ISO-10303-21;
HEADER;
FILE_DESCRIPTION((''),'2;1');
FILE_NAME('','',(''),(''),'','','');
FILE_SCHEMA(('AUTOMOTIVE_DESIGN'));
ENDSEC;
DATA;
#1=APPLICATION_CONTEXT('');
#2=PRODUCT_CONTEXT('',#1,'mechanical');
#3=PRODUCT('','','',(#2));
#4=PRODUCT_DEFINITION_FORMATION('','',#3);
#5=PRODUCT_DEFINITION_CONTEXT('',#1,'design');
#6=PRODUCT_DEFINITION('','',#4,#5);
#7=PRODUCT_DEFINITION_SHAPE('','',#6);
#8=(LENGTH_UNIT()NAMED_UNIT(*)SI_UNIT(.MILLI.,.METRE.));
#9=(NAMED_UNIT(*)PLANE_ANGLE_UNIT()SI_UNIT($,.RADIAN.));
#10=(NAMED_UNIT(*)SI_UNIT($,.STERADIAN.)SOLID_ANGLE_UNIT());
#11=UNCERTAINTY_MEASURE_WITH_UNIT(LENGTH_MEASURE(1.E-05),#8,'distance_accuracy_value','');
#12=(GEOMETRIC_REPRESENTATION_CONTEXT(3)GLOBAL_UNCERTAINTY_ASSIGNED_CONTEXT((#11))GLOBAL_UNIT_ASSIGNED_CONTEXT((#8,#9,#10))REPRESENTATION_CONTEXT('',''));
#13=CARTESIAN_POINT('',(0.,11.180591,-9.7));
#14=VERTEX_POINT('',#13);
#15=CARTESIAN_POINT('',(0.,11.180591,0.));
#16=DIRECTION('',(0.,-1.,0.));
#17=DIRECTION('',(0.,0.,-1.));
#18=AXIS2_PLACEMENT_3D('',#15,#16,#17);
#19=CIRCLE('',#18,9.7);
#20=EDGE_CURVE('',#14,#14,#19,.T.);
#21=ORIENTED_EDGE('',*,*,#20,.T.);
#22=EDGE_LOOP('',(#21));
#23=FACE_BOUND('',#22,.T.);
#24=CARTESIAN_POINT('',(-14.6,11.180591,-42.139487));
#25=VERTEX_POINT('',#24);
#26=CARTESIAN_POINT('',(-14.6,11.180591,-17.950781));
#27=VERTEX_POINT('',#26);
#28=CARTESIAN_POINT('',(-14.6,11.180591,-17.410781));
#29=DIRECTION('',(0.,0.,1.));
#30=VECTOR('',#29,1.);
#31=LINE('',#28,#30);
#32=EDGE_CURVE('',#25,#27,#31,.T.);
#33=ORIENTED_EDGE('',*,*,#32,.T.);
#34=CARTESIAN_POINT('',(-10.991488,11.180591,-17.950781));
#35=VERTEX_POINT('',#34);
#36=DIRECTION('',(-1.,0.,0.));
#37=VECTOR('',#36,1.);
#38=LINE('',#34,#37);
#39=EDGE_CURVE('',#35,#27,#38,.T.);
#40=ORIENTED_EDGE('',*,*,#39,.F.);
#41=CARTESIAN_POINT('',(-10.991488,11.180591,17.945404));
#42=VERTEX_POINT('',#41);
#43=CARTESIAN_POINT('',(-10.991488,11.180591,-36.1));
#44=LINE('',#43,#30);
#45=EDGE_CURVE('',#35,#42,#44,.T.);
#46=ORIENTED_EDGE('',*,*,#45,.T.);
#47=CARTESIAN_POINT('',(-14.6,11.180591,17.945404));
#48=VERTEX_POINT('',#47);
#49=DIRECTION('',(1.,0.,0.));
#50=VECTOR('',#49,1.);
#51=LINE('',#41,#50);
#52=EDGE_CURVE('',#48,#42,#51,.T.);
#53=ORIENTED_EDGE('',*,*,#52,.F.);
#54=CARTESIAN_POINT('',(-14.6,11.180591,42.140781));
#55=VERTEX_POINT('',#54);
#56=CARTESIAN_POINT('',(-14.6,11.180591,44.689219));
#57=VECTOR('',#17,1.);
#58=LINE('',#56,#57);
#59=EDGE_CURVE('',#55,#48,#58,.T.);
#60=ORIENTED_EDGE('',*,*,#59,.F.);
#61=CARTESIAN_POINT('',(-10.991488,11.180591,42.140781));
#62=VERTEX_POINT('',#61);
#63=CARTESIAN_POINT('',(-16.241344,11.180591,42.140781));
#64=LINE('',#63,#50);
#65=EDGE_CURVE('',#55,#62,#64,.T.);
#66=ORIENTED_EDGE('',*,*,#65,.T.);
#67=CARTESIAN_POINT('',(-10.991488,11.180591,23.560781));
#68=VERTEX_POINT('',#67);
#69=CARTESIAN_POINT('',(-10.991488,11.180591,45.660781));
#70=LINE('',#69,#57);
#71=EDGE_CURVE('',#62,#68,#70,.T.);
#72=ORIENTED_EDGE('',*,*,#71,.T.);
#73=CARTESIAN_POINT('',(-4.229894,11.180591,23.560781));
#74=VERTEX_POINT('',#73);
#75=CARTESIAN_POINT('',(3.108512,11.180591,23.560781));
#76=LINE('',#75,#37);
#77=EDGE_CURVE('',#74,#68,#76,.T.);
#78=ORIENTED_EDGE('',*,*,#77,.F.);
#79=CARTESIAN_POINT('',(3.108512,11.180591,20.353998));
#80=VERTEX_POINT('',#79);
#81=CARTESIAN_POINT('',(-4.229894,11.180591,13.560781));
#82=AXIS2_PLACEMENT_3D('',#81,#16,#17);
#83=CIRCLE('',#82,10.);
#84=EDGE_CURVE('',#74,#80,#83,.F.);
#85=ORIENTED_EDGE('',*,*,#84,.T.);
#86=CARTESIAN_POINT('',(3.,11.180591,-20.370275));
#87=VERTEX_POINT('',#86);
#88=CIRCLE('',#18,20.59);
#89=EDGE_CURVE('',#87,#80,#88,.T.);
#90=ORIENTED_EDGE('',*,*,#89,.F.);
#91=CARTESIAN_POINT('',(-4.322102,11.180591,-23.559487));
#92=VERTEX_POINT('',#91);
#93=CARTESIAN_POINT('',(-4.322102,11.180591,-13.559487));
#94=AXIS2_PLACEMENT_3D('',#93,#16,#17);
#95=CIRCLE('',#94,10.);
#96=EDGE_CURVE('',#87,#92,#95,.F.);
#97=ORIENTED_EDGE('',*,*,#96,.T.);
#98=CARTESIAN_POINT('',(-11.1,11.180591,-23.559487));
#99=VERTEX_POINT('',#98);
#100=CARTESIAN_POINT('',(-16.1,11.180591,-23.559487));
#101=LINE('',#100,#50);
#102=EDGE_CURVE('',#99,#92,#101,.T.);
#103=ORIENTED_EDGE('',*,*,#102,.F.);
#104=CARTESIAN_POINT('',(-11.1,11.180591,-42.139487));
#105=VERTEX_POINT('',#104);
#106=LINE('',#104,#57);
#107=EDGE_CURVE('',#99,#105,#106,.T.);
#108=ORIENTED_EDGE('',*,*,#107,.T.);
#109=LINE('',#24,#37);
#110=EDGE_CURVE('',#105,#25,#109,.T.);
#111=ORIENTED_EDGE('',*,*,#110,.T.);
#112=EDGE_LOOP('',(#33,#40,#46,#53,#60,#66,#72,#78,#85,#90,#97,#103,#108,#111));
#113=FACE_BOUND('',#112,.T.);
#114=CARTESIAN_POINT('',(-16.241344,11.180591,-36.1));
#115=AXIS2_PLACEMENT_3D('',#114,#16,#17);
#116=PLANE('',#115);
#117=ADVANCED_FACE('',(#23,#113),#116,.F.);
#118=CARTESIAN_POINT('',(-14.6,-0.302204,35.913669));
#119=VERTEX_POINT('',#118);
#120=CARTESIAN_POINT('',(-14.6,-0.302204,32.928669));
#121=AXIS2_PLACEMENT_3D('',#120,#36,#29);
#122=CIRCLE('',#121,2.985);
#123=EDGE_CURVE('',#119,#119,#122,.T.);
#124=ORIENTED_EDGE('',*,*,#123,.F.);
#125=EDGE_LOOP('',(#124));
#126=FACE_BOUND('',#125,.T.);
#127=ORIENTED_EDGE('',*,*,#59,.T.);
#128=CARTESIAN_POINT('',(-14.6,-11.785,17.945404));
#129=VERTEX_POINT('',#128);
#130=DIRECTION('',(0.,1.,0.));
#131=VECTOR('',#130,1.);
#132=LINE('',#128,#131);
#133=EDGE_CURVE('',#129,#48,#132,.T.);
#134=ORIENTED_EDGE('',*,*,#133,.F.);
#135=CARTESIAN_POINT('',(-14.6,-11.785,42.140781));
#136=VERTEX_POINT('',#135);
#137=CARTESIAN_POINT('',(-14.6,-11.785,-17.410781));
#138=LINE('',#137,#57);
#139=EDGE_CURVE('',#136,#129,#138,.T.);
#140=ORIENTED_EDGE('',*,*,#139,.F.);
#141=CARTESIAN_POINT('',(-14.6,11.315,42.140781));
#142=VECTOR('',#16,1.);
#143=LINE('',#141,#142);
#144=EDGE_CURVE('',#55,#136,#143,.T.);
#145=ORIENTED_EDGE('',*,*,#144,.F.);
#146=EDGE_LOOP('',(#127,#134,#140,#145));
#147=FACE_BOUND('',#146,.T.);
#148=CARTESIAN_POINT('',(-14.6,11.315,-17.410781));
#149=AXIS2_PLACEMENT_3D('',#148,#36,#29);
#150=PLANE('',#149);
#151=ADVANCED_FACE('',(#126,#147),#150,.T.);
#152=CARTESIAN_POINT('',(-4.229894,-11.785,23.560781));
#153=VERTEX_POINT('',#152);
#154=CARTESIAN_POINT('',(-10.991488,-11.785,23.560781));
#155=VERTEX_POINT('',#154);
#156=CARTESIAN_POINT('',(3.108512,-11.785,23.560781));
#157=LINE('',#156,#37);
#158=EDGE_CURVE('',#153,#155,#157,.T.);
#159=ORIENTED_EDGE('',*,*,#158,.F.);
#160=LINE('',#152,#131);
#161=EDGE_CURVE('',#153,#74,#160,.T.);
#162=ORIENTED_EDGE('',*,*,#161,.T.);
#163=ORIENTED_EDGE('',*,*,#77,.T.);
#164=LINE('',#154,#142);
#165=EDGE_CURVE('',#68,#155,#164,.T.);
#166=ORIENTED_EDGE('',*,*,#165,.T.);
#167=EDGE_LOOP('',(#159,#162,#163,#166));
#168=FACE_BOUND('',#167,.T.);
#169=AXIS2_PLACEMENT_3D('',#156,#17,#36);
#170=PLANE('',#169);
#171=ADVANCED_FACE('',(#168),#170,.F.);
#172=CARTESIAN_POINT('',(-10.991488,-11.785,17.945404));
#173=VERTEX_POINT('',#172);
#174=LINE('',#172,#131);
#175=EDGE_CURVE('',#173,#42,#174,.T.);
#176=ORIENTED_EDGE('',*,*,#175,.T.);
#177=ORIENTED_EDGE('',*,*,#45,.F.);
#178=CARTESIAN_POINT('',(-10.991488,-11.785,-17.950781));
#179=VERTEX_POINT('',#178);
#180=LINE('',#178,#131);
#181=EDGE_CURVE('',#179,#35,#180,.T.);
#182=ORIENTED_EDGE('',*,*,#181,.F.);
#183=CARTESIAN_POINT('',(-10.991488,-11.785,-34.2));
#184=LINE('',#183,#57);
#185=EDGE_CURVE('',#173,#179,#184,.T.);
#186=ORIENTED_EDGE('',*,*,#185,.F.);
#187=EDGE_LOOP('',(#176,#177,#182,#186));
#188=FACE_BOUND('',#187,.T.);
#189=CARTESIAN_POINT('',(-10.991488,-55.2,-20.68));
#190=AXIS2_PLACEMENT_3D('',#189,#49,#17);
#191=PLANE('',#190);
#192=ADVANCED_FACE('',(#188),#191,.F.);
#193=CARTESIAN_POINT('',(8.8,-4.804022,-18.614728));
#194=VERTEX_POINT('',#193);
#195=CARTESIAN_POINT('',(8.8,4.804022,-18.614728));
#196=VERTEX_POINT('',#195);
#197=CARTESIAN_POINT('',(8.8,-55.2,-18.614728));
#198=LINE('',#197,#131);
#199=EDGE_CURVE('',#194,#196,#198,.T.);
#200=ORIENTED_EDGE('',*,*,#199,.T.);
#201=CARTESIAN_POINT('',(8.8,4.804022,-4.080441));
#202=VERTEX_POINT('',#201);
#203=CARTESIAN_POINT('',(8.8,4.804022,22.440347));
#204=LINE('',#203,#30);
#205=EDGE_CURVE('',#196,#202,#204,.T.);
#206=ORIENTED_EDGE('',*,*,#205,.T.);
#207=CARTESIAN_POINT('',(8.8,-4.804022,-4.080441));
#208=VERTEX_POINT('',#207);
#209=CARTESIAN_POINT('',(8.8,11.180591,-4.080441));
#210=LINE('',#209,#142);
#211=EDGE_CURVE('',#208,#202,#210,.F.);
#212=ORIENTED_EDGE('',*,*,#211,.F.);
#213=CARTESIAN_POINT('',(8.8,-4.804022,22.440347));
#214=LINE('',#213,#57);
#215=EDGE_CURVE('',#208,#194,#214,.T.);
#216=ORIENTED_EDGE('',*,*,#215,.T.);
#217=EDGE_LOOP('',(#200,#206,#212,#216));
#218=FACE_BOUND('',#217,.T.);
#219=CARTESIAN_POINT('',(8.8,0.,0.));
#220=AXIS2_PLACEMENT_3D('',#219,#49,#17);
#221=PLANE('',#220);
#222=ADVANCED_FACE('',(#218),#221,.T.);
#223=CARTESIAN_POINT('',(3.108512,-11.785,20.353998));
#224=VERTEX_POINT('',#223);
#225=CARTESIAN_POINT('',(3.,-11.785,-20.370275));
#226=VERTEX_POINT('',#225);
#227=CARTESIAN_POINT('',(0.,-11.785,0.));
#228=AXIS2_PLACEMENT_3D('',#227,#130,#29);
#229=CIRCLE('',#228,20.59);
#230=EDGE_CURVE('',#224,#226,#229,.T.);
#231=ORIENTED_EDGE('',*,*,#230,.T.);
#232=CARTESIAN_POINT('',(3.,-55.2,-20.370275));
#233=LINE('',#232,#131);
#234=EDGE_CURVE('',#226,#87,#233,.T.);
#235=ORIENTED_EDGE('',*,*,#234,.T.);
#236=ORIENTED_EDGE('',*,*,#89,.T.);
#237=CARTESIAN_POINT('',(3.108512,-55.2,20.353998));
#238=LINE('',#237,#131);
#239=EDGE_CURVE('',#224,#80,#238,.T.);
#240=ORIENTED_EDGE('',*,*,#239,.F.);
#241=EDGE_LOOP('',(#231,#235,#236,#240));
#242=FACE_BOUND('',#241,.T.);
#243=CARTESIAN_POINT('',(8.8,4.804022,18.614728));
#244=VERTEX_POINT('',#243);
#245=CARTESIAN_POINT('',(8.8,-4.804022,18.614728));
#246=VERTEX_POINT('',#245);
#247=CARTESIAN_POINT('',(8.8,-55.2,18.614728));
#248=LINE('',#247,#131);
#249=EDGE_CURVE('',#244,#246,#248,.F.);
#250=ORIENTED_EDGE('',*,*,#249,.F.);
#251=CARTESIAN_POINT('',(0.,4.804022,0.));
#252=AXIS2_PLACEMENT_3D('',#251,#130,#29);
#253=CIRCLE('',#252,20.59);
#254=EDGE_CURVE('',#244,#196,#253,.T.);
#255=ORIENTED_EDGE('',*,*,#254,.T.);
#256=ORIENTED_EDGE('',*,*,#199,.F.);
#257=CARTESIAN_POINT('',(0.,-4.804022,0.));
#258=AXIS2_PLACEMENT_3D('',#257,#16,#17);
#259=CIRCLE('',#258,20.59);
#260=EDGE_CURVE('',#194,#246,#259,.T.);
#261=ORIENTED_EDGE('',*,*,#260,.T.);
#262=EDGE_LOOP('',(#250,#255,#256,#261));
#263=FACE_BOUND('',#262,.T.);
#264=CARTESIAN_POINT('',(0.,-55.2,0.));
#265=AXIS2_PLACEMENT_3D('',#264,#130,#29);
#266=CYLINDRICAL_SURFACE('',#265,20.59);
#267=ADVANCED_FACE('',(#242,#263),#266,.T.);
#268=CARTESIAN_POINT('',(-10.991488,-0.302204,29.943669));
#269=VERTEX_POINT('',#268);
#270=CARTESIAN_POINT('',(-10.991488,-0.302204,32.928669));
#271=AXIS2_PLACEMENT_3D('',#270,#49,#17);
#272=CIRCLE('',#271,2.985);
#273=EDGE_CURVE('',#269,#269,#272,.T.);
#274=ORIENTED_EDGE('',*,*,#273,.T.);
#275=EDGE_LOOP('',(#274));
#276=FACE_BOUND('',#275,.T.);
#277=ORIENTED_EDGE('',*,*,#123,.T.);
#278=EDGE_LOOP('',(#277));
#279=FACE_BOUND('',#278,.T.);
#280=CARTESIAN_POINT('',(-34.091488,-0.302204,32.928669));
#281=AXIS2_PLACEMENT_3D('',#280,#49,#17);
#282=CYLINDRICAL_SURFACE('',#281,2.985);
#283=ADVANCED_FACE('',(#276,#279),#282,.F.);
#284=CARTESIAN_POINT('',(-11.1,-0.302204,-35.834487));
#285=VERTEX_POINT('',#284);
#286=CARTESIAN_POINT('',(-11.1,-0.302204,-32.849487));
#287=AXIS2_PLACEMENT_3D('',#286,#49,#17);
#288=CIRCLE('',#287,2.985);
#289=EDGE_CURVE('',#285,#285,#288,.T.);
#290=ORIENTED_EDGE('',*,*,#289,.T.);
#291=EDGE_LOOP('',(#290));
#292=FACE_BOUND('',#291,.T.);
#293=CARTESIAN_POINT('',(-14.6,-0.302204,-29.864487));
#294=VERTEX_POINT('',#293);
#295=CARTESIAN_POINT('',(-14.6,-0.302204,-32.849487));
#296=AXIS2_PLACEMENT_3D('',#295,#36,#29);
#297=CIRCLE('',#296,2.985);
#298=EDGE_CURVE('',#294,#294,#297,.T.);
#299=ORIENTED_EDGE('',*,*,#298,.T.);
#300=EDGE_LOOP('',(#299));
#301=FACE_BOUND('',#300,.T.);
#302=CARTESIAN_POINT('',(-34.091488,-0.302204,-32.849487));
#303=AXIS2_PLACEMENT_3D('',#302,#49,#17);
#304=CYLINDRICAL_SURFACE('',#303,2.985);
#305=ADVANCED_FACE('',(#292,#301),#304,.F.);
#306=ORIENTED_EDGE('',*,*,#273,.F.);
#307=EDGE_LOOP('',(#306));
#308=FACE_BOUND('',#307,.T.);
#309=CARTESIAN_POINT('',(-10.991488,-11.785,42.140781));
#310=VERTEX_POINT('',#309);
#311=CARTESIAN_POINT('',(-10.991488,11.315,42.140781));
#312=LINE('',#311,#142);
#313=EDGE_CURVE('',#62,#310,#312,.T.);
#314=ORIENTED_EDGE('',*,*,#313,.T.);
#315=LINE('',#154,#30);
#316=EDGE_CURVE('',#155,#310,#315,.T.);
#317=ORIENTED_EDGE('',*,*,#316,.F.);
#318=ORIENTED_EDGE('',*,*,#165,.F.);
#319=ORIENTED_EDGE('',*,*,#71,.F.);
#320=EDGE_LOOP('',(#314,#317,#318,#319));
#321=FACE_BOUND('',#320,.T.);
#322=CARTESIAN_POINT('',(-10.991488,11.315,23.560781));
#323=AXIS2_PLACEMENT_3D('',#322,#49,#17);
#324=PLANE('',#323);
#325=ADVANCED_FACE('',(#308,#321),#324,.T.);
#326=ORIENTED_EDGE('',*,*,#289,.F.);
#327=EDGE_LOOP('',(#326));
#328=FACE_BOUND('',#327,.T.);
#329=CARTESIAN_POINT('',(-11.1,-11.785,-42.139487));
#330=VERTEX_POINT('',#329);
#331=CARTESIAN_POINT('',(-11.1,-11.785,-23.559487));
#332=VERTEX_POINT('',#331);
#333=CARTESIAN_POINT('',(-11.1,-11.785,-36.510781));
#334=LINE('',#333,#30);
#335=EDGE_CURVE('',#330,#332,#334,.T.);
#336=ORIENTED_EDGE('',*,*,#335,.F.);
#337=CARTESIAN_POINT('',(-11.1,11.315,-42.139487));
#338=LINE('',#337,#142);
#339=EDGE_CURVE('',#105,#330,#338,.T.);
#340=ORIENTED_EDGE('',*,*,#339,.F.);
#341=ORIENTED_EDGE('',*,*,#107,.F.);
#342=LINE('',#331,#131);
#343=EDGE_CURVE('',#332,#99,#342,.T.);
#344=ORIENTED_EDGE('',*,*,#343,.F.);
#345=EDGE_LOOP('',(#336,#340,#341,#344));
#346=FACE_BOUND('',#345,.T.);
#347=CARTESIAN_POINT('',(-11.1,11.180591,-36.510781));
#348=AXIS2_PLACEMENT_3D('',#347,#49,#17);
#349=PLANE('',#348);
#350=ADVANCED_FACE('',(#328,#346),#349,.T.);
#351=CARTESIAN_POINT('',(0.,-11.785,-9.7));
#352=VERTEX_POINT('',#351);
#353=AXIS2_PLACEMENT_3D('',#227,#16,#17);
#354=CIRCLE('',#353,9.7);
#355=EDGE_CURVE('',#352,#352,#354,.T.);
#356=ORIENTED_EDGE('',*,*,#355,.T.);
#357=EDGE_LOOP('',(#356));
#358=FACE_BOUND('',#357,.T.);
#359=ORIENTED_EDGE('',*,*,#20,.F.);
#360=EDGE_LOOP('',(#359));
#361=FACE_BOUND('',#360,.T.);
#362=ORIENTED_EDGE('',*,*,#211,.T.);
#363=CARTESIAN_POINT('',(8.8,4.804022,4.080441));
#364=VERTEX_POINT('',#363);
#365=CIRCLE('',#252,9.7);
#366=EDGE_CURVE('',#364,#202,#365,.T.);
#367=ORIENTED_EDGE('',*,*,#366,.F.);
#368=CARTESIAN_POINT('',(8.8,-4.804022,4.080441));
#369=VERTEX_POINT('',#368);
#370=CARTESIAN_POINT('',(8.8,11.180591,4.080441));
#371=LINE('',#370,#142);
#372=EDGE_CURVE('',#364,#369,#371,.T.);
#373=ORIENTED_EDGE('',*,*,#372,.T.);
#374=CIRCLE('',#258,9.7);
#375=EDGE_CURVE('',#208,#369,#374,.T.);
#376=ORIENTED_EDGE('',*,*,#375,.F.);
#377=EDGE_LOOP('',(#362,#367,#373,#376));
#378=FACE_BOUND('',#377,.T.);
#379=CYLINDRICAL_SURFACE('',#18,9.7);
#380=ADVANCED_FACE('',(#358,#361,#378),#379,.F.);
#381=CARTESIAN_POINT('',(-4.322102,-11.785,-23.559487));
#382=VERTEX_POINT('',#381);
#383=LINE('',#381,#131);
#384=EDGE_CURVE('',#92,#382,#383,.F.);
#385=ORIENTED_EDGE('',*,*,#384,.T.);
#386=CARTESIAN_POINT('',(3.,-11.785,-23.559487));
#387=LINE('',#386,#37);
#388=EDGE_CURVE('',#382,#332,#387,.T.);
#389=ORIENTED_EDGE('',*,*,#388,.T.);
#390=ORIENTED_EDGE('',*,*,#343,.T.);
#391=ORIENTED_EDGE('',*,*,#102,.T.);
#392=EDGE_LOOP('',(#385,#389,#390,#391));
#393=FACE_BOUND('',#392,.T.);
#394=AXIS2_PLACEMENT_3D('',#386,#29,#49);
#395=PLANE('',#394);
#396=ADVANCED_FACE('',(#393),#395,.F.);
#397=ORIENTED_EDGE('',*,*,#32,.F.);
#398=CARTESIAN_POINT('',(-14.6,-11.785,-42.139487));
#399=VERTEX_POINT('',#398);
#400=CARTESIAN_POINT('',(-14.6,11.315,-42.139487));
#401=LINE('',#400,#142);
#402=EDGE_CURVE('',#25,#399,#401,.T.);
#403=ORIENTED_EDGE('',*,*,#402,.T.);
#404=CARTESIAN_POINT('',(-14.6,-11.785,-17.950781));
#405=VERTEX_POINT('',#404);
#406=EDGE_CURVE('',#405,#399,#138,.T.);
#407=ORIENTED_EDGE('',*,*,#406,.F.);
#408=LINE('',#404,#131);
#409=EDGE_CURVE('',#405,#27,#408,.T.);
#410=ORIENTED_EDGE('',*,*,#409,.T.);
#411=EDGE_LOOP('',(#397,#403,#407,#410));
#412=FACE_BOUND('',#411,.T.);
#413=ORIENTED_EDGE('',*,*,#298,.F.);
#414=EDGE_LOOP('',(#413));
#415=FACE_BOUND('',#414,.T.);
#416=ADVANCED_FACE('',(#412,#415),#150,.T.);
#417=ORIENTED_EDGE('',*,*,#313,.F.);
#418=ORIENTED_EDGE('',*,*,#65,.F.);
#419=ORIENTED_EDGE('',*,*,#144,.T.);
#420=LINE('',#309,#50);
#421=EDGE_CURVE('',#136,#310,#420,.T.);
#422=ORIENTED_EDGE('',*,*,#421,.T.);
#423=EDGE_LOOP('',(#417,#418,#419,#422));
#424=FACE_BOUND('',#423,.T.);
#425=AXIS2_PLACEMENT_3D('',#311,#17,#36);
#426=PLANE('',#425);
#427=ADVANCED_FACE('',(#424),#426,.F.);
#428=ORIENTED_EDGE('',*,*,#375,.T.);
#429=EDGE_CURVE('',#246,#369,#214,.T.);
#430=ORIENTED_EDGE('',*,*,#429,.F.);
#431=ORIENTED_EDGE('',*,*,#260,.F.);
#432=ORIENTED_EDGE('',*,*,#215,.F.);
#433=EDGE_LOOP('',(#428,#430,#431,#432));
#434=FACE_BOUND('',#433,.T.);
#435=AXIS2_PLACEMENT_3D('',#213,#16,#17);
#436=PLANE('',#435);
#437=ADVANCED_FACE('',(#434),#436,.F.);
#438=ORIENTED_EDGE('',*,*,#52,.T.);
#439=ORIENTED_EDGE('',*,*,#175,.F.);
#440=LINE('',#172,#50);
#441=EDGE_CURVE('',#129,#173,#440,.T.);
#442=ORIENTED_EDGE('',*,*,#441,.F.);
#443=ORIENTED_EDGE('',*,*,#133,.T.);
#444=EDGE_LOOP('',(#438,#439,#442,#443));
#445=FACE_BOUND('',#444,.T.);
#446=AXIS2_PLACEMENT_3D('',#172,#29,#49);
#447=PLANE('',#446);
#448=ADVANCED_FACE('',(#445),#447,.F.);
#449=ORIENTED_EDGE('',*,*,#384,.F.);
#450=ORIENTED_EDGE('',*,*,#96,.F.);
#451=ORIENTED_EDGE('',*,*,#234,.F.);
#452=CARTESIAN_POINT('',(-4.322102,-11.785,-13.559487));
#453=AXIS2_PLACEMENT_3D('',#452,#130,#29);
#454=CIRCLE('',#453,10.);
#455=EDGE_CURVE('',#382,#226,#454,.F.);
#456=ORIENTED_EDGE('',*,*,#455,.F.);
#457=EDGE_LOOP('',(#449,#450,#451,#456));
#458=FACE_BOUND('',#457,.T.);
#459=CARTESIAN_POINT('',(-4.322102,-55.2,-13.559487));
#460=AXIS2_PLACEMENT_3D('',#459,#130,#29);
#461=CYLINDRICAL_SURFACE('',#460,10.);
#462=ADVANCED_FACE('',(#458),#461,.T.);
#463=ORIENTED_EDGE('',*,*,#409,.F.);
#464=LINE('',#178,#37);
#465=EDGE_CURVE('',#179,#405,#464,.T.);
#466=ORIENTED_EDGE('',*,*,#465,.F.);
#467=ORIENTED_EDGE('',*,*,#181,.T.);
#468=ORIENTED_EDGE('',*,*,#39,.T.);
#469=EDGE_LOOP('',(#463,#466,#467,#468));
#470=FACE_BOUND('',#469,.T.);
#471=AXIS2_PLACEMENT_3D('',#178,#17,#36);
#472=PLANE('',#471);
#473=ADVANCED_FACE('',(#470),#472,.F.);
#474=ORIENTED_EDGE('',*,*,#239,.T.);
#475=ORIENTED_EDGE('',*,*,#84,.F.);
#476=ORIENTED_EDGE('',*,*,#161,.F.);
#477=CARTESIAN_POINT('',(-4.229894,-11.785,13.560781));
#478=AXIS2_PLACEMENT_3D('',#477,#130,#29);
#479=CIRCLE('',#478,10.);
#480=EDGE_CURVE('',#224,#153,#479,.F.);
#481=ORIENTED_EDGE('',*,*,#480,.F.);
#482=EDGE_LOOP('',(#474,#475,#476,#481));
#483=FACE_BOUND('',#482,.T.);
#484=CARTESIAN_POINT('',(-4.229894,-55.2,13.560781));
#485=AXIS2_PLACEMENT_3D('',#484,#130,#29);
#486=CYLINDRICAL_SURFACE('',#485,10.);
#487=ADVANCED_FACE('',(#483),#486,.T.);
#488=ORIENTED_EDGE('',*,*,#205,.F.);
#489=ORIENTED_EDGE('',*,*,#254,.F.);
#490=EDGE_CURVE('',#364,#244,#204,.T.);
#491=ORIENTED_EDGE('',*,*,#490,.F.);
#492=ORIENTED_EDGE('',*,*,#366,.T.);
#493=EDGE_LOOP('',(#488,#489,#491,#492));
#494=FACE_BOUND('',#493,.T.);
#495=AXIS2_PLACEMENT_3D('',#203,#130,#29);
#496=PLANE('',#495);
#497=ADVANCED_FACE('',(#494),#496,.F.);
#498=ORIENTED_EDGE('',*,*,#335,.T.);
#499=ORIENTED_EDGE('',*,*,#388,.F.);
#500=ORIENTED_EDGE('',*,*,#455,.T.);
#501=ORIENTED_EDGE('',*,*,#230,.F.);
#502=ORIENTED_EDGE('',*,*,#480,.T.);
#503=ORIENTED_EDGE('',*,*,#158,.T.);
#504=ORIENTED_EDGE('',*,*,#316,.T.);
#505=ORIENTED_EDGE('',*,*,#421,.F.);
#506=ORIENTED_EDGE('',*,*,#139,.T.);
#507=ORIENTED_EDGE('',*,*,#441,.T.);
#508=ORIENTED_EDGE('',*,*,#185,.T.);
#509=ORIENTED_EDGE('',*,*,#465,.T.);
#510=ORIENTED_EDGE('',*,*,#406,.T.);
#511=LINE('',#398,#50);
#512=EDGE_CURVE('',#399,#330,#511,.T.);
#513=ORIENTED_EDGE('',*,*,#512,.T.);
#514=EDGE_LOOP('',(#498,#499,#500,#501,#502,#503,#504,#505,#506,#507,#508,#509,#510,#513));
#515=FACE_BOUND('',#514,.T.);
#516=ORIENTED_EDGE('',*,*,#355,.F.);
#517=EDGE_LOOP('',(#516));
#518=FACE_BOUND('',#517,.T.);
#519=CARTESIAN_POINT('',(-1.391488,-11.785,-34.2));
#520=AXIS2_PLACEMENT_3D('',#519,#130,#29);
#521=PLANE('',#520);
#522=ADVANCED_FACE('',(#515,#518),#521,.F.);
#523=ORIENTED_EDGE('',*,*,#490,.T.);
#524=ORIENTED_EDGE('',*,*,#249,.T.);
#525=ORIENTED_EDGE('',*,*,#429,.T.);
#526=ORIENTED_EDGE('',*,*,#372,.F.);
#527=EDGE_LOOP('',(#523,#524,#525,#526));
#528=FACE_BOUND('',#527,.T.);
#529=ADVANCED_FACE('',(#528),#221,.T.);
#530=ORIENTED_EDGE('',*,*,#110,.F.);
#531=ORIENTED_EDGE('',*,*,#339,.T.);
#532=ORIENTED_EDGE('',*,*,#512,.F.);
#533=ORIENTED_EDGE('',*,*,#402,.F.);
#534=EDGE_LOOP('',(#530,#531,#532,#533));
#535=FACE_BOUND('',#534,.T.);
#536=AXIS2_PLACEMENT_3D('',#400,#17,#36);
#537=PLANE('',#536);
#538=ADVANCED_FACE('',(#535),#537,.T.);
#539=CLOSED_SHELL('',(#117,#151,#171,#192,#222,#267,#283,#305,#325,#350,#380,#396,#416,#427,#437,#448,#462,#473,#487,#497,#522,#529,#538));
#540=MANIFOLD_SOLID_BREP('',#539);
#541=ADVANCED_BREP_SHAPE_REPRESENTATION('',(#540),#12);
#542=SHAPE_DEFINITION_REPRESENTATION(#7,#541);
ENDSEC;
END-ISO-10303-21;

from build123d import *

# Parameters (mm, degrees)
SKETCH_1_R           = 20.68
SKETCH_1_R_2         = 9.68
EXTRUDE_1_DEPTH      = 116.68
SKETCH_11_W          = 27
SKETCH_11_H          = 150
CUT_EXTRUDE_3_DEPTH  = 40
SKETCH_13_W          = 10
SKETCH_13_H          = 128.345013401
CUT_EXTRUDE_7_DEPTH  = 126.614916312
SKETCH_15_W          = 8
SKETCH_15_H          = 68.68
CUT_EXTRUDE_9_DEPTH  = 48
SKETCH_16_W          = 15.549431524
SKETCH_16_H          = 20
SKETCH_16_W_2        = 15.459431524
EXTRUDE_4_DEPTH      = 19.2
SKETCH_17_W          = 19.20851187
SKETCH_17_H          = 14.03
CUT_EXTRUDE_10_DEPTH = 20.2
SKETCH_18_R          = 9.59
CUT_EXTRUDE_11_DEPTH = 121.289430957
SKETCH_21_R          = 2.985
CUT_EXTRUDE_12_DEPTH = 55.2
EXTRUDE_START        = 55.2
SKETCH_24_R          = 20.59
SKETCH_24_R_2        = 9.59
EXTRUDE_2_DEPTH      = 55.2
CUT_EXTRUDE_13_DEPTH = 55.2
SKETCH_26_W          = 10.00851187
SKETCH_26_H          = 41.68
CUT_EXTRUDE_15_DEPTH = 55.2
SKETCH_27_W          = 10
SKETCH_27_H          = 40
CUT_EXTRUDE_16_DEPTH = 55.2
SKETCH_28_W          = 44.880694938
SKETCH_28_H          = 9.608044066
CUT_EXTRUDE_17_DEPTH = 12.2
SKETCH_35_W          = 13.53
SKETCH_35_H          = 20
EXTRUDE_10_DEPTH     = 15
EXTRUDE_11_DEPTH     = 15
SKETCH_37_W          = 9
SKETCH_37_H          = 20
EXTRUDE_12_DEPTH     = 20
SKETCH_38_W          = 9
SKETCH_38_H          = 20
EXTRUDE_13_DEPTH     = 20
SKETCH_42_R          = 2.985
CUT_EXTRUDE_21_DEPTH = 20
CUT_EXTRUDE_23_DEPTH = 138.235841092
SKETCH_45_W          = 3
SKETCH_45_H          = 20
EXTRUDE_14_DEPTH     = 30
SKETCH_46_W          = 3
SKETCH_46_H          = 20
EXTRUDE_15_DEPTH     = 30
SKETCH_47_W          = 33.078221107
SKETCH_47_H          = 20
EXTRUDE_16_DEPTH     = 50
SKETCH_48_W          = 30
SKETCH_48_H          = 20
EXTRUDE_17_DEPTH     = 50
SKETCH_50_W          = 50
SKETCH_50_H          = 20
EXTRUDE_18_DEPTH     = 1
SKETCH_51_W          = 50
SKETCH_51_H          = 20
EXTRUDE_19_DEPTH     = 1
SKETCH_52_W          = 53
SKETCH_52_H          = 14
CUT_EXTRUDE_24_DEPTH = 151.972575738
SKETCH_53_W          = 53
SKETCH_53_H          = 14
CUT_EXTRUDE_25_DEPTH = 151.942387436
SKETCH_54_W          = 40
SKETCH_54_H          = 73.27
CUT_EXTRUDE_26_DEPTH = 147.866192927
SKETCH_56_W          = 13.00851187
SKETCH_56_H          = 20
EXTRUDE_21_DEPTH     = 3.08
SKETCH_60_W          = 6.504255935
SKETCH_60_H          = 76.35
CUT_EXTRUDE_30_DEPTH = 137.106994034
CUT_EXTRUDE_32_DEPTH = 20
SKETCH_64_W          = 16.20851187
SKETCH_64_H          = 0.09
EXTRUDE_22_DEPTH     = 20
SKETCH_65_W          = 3.495744065
SKETCH_65_H          = 3.26
CUT_EXTRUDE_33_DEPTH = 137.057988464
SKETCH_66_W          = 3.495744065
SKETCH_66_H          = 1.776778893
SKETCH_66_W_2        = 3.503635083
SKETCH_66_H_2        = 1.775
EXTRUDE_23_DEPTH     = 20.2
SKETCH_68_W          = 6.504255935
SKETCH_68_H          = 3.66
CUT_EXTRUDE_34_DEPTH = 20
SKETCH_69_R          = 2.985
CUT_EXTRUDE_35_DEPTH = 126.598983893
SKETCH_70_R          = 2.985
CUT_EXTRUDE_36_DEPTH = 132.360728238
SKETCH_71_W          = 38.005321573
SKETCH_71_H          = 111.965885132
CUT_EXTRUDE_37_DEPTH = 147.475577566
SKETCH_72_R          = 9.7
CUT_EXTRUDE_38_DEPTH = 38.185254838
CUT_EXTRUDE_START    = -22
SKETCH_77_R          = 30.59
SKETCH_77_R_2        = 20.59
CUT_EXTRUDE_2_DEPTH  = 22
SKETCH_78_W          = 34.816185151
SKETCH_78_H          = 22.96559116
EXTRUDE_26_DEPTH     = 0.1
SKETCH_80_W          = 2.900031179
SKETCH_80_H          = 6.148706656
EXTRUDE_28_DEPTH     = 23.1
SKETCH_81_W          = 6.148706656
SKETCH_81_H          = 23.1
EXTRUDE_29_DEPTH     = 14.1
SKETCH_82_W          = 6.148706656
SKETCH_82_H          = 0.13440884
CUT_EXTRUDE_39_DEPTH = 19.1
SKETCH_83_W          = 2.900031179
SKETCH_83_H          = 22.96559116
EXTRUDE_30_DEPTH     = 19.1
FILLET_1_R           = 10
SKETCH_84_W          = 3.5
SKETCH_84_H          = 19.1
EXTRUDE_31_DEPTH     = 23.1
SKETCH_85_W          = 3.5
SKETCH_85_H          = 0.52
CUT_EXTRUDE_40_DEPTH = 48.860163141
SKETCH_86_W          = 3.5
SKETCH_86_H          = 22.96559116
EXTRUDE_32_DEPTH     = 62.1
SKETCH_87_W          = 3.60851187
SKETCH_87_H          = 34.816185151
CUT_EXTRUDE_41_DEPTH = 62.1
SKETCH_89_W          = 0.10851187
SKETCH_89_H          = 6.15
EXTRUDE_33_DEPTH     = 23.1
EXTRUDE_34_DEPTH     = 22.1
SKETCH_91_W          = 0.971561636
SKETCH_91_H          = 22.96559116
CUT_EXTRUDE_42_DEPTH = 22.1
SKETCH_95_W          = 6.15
SKETCH_95_H          = 22.96559116
EXTRUDE_35_DEPTH     = 14.1
FILLET_2_R           = 10
SKETCH_96_W          = 3.60851187
SKETCH_96_H          = 2.548438364
CUT_EXTRUDE_43_DEPTH = 55.35700885
SKETCH_97_W          = 3.5
SKETCH_97_H          = 6.148706656
EXTRUDE_36_DEPTH     = 23.1
CUT_EXTRUDE_44_DEPTH = 23.1
SKETCH_99_W          = 6.15
SKETCH_99_H          = 0.13440884
CUT_EXTRUDE_45_DEPTH = 23.1
SKETCH_101_R         = 2.985
CUT_EXTRUDE_46_DEPTH = 23.1
SKETCH_103_W         = 3.60851187
SKETCH_103_H         = 0.54
CUT_EXTRUDE_49_DEPTH = 53.222714265
SKETCH_104_W         = 3.60851187
SKETCH_104_H         = 0.54
CUT_EXTRUDE_50_DEPTH = 53.222714265


with BuildPart() as part:
    # 草圖1 → 伸長-薄件1 (new body)
    with BuildSketch(Plane(origin=(0, 0, 0), x_dir=(1, 0, 0), z_dir=(0, 1, 0))):
        Circle(SKETCH_1_R)
        Circle(SKETCH_1_R_2, mode=Mode.SUBTRACT)
    extrude(amount=EXTRUDE_1_DEPTH)

    # 草圖11 → 除料-伸長3 (cut)
    with BuildSketch(Plane(origin=(0, 116.68, 0), x_dir=(1, 0, 0), z_dir=(0, 1, 0))):
        with Locations((21.70851187, -44.235815192)):
            Rectangle(SKETCH_11_W, SKETCH_11_H)
    extrude(amount=-CUT_EXTRUDE_3_DEPTH, mode=Mode.SUBTRACT)

    # 草圖13 → 除料-伸長7 (cut, through all)
    with BuildSketch(Plane.XY.offset(21)):
        with Locations((-16, 58.612182466)):
            Rectangle(SKETCH_13_W, SKETCH_13_H)
    extrude(amount=-CUT_EXTRUDE_7_DEPTH, mode=Mode.SUBTRACT)

    # 草圖15 → 除料-伸長9 (cut)
    with BuildSketch(Plane.XY.offset(21)):
        with Locations((-1.395744065, 52.34)):
            Rectangle(SKETCH_15_W, SKETCH_15_H)
    extrude(amount=-CUT_EXTRUDE_9_DEPTH, mode=Mode.SUBTRACT)

    # 草圖16 → 填料-伸長4 (add)
    with BuildSketch(Plane(origin=(8.20851187, 0, 0), x_dir=(0, 0, -1), z_dir=(1, 0, 0))):
        with Locations((12.905284238, 106.68)):
            Rectangle(SKETCH_16_W, SKETCH_16_H)
        with Locations((-12.860284238, 106.68)):
            Rectangle(SKETCH_16_W_2, SKETCH_16_H)
    extrude(amount=-EXTRUDE_4_DEPTH)

    # 草圖17 → 除料-伸長10 (cut)
    with BuildSketch(Plane(origin=(0, 116.68, 0), x_dir=(1, 0, 0), z_dir=(0, 1, 0))):
        with Locations((-1.395744065, -0.045)):
            Rectangle(SKETCH_17_W, SKETCH_17_H)
    extrude(amount=-CUT_EXTRUDE_10_DEPTH, mode=Mode.SUBTRACT)

    # 草圖18 → 除料-伸長11 (cut, through all)
    with BuildSketch(Plane.XZ):
        with Locations(Location((0, 0, 0), (0, 0, 90))):
            Circle(SKETCH_18_R)
    extrude(amount=-CUT_EXTRUDE_11_DEPTH, mode=Mode.SUBTRACT)

    # 草圖21 → 除料-伸長12 (cut)
    with BuildSketch(Plane(origin=(0, 0, -20.68), x_dir=(-1, 0, 0), z_dir=(0, 0, -1))):
        with Locations((1.39148813, 108.73)):
            Circle(SKETCH_21_R)
    extrude(amount=-CUT_EXTRUDE_12_DEPTH, mode=Mode.SUBTRACT)

    # 草圖24 → 伸長-薄件2 (add)
    with BuildSketch(Plane.XZ.offset(EXTRUDE_START)):
        Circle(SKETCH_24_R)
        Circle(SKETCH_24_R_2, mode=Mode.SUBTRACT)
    extrude(amount=-EXTRUDE_2_DEPTH)

    # 草圖25 → 除料-伸長13 (cut)
    with BuildSketch(Plane.XY.offset(21)):
        Polygon((-1.39148813, -11.785), (22.612379708, -11.785), (22.612379708, -63.873337429), (-22.749525245, -63.873337429), (-22.749525245, -11.785), align=None)
    extrude(amount=-CUT_EXTRUDE_13_DEPTH, mode=Mode.SUBTRACT)

    # 草圖26 → 除料-伸長15 (cut)
    with BuildSketch(Plane(origin=(0, 0, 0), x_dir=(1, 0, 0), z_dir=(0, 1, 0))):
        with Locations((-15.995744065, -0.16)):
            Rectangle(SKETCH_26_W, SKETCH_26_H)
    extrude(amount=-CUT_EXTRUDE_15_DEPTH, mode=Mode.SUBTRACT)

    # 草圖27 → 除料-伸長16 (cut)
    with BuildSketch(Plane(origin=(21, 0, 0), x_dir=(0, 0, -1), z_dir=(1, 0, 0))):
        with Locations((0, 41.68)):
            Rectangle(SKETCH_27_W, SKETCH_27_H)
    extrude(amount=-CUT_EXTRUDE_16_DEPTH, mode=Mode.SUBTRACT)

    # 草圖28 → 除料-伸長17 (cut)
    with BuildSketch(Plane(origin=(21, 0, 0), x_dir=(0, 0, -1), z_dir=(1, 0, 0))):
        Rectangle(SKETCH_28_W, SKETCH_28_H)
    extrude(amount=-CUT_EXTRUDE_17_DEPTH, mode=Mode.SUBTRACT)

    # 草圖35 → 填料-伸長10 (add)
    with BuildSketch(Plane.ZY.offset(10.99148813)):
        with Locations((13.825, 106.68)):
            Rectangle(SKETCH_35_W, SKETCH_35_H)
    extrude(amount=EXTRUDE_10_DEPTH)

    # 草圖36 → 填料-伸長11 (add)
    with BuildSketch(Plane.ZY.offset(10.99148813)):
        Polygon((-20.68, 116.68), (-6.97, 116.68), (-6.97, 96.48), (-20.68, 96.68), align=None)
    extrude(amount=EXTRUDE_11_DEPTH)

    # 草圖37 → 填料-伸長12 (add)
    with BuildSketch(Plane.XY.offset(20.59)):
        with Locations((-21.49148813, 106.68)):
            Rectangle(SKETCH_37_W, SKETCH_37_H)
    extrude(amount=EXTRUDE_12_DEPTH)

    # 草圖38 → 填料-伸長13 (add)
    with BuildSketch(Plane(origin=(0, 0, -20.68), x_dir=(-1, 0, 0), z_dir=(0, 0, -1))):
        with Locations((21.49148813, 106.68)):
            Rectangle(SKETCH_38_W, SKETCH_38_H)
    extrude(amount=EXTRUDE_13_DEPTH)

    # 草圖42 → 除料-伸長21 (cut)
    with BuildSketch(Plane(origin=(-16.99148813, 0, 0), x_dir=(0, 0, -1), z_dir=(1, 0, 0))):
        with Locations((30.68, 106.554418142)):
            Circle(SKETCH_42_R)
        with Locations((-30.395640125, 106.68)):
            Circle(SKETCH_42_R)
    extrude(amount=-CUT_EXTRUDE_21_DEPTH, mode=Mode.SUBTRACT)

    # 草圖43 → 除料-伸長23 (cut, through all)
    with BuildSketch(Plane(origin=(0, 116.68, 0), x_dir=(1, 0, 0), z_dir=(0, 1, 0))):
        Polygon((-11, 6.97), (-10.99148813, 20.68), (-10.99148813, 48.096794253), (-28.274756234, 48.096794253), (-28.274756234, -43.270506289), (-11, -43.270506289), align=None)
    extrude(amount=-CUT_EXTRUDE_23_DEPTH, mode=Mode.SUBTRACT)

    # 草圖45 → 填料-伸長14 (add)
    with BuildSketch(Plane.XY.offset(20.59)):
        with Locations((-9.5, 106.68)):
            Rectangle(SKETCH_45_W, SKETCH_45_H)
    extrude(amount=EXTRUDE_14_DEPTH)

    # 草圖46 → 填料-伸長15 (add)
    with BuildSketch(Plane(origin=(0, 0, -20.68), x_dir=(-1, 0, 0), z_dir=(0, 0, -1))):
        with Locations((9.49148813, 106.68)):
            Rectangle(SKETCH_46_W, SKETCH_46_H)
    extrude(amount=EXTRUDE_15_DEPTH)

    # 草圖47 → 填料-伸長16 (add)
    with BuildSketch(Plane.ZY.offset(11)):
        with Locations((34.050889447, 106.68)):
            Rectangle(SKETCH_47_W, SKETCH_47_H)
    extrude(amount=EXTRUDE_16_DEPTH)

    # 草圖48 → 填料-伸長17 (add)
    with BuildSketch(Plane.ZY.offset(10.99148813)):
        with Locations((-35.68, 106.68)):
            Rectangle(SKETCH_48_W, SKETCH_48_H)
    extrude(amount=EXTRUDE_17_DEPTH)

    # 草圖50 → 填料-伸長18 (add)
    with BuildSketch(Plane(origin=(0, 0, 17.511778893), x_dir=(-1, 0, 0), z_dir=(0, 0, -1))):
        with Locations((36, 106.68)):
            Rectangle(SKETCH_50_W, SKETCH_50_H)
    extrude(amount=EXTRUDE_18_DEPTH)

    # 草圖51 → 填料-伸長19 (add)
    with BuildSketch(Plane.XY.offset(-20.68)):
        with Locations((-35.99148813, 106.68)):
            Rectangle(SKETCH_51_W, SKETCH_51_H)
    extrude(amount=EXTRUDE_19_DEPTH)

    # 草圖52 → 除料-伸長24 (cut, through all)
    with BuildSketch(Plane(origin=(0, 116.68, 0), x_dir=(1, 0, 0), z_dir=(0, 1, 0))):
        with Locations((-34.49148813, 43.68)):
            Rectangle(SKETCH_52_W, SKETCH_52_H)
    extrude(amount=-CUT_EXTRUDE_24_DEPTH, mode=Mode.SUBTRACT)

    # 草圖53 → 除料-伸長25 (cut, through all)
    with BuildSketch(Plane(origin=(0, 116.68, 0), x_dir=(1, 0, 0), z_dir=(0, 1, 0))):
        with Locations((-34.5, -43.59)):
            Rectangle(SKETCH_53_W, SKETCH_53_H)
    extrude(amount=-CUT_EXTRUDE_25_DEPTH, mode=Mode.SUBTRACT)

    # 草圖54 → 除料-伸長26 (cut, through all)
    with BuildSketch(Plane(origin=(0, 116.68, 0), x_dir=(1, 0, 0), z_dir=(0, 1, 0))):
        with Locations((-41, 0.045)):
            Rectangle(SKETCH_54_W, SKETCH_54_H)
    extrude(amount=-CUT_EXTRUDE_26_DEPTH, mode=Mode.SUBTRACT)

    # 草圖56 → 填料-伸長21 (add)
    with BuildSketch(Plane(origin=(0, 0, -36.68), x_dir=(-1, 0, 0), z_dir=(0, 0, -1))):
        with Locations((14.495744065, 106.68)):
            Rectangle(SKETCH_56_W, SKETCH_56_H)
    extrude(amount=EXTRUDE_21_DEPTH)

    # 草圖60 → 除料-伸長30 (cut, through all)
    with BuildSketch(Plane(origin=(0, 116.68, 0), x_dir=(1, 0, 0), z_dir=(0, 1, 0))):
        with Locations((-17.747872032, 1.585)):
            Rectangle(SKETCH_60_W, SKETCH_60_H)
    extrude(amount=-CUT_EXTRUDE_30_DEPTH, mode=Mode.SUBTRACT)

    # 草圖61 → 除料-伸長32 (cut)
    with BuildSketch(Plane(origin=(0, 116.68, 0), x_dir=(1, 0, 0), z_dir=(0, 1, 0))):
        Polygon((1.92725193, -20.59), (1.92725193, -22.399121663), (-2.174190472, -21.421542421), (-2.174190472, -20.59), align=None)
    extrude(amount=-CUT_EXTRUDE_32_DEPTH, mode=Mode.SUBTRACT)

    # 草圖64 → 填料-伸長22 (add)
    with BuildSketch(Plane(origin=(0, 116.68, 0), x_dir=(1, 0, 0), z_dir=(0, 1, 0))):
        with Locations((0.104255935, -20.635)):
            Rectangle(SKETCH_64_W, SKETCH_64_H)
    extrude(amount=-EXTRUDE_22_DEPTH)

    # 草圖65 → 除料-伸長33 (cut, through all)
    with BuildSketch(Plane(origin=(0, 116.68, 0), x_dir=(1, 0, 0), z_dir=(0, 1, 0))):
        with Locations((-12.747872033, -18.141778893)):
            Rectangle(SKETCH_65_W, SKETCH_65_H)
    extrude(amount=-CUT_EXTRUDE_33_DEPTH, mode=Mode.SUBTRACT)

    # 草圖66 → 填料-伸長23 (add)
    with BuildSketch(Plane(origin=(0, 96.48, 0), x_dir=(1, 0, 0), z_dir=(0, 1, 0))):
        with Locations((-12.747872033, -18.883389447)):
            Rectangle(SKETCH_66_W, SKETCH_66_H)
        with Locations((-12.743926524, 18.7925)):
            Rectangle(SKETCH_66_W_2, SKETCH_66_H_2)
    extrude(amount=EXTRUDE_23_DEPTH)

    # 草圖68 → 除料-伸長34 (cut)
    with BuildSketch(Plane(origin=(0, 116.68, 0), x_dir=(1, 0, 0), z_dir=(0, 1, 0))):
        with Locations((-11.243616098, 37.93)):
            Rectangle(SKETCH_68_W, SKETCH_68_H)
    extrude(amount=-CUT_EXTRUDE_34_DEPTH, mode=Mode.SUBTRACT)

    # 草圖69 → 除料-伸長35 (cut, through all)
    with BuildSketch(Plane(origin=(-7.99148813, 0, 0), x_dir=(0, 0, -1), z_dir=(1, 0, 0))):
        with Locations((28.39, 106.68)):
            Circle(SKETCH_69_R)
        with Locations((-28.635, 106.68)):
            Circle(SKETCH_69_R)
    extrude(amount=-CUT_EXTRUDE_35_DEPTH, mode=Mode.SUBTRACT)

    # 草圖70 → 除料-伸長36 (cut, through all)
    with BuildSketch(Plane(origin=(0, 0, 20.59), x_dir=(-1, 0, 0), z_dir=(0, 0, -1))):
        with Locations((1.39148813, 108.73)):
            Circle(SKETCH_70_R)
    extrude(amount=-CUT_EXTRUDE_36_DEPTH, mode=Mode.SUBTRACT)

    # 草圖71 → 除料-伸長37 (cut, through all)
    with BuildSketch(Plane.XY.offset(50)):
        with Locations((2.76131712, 67.163533726)):
            Rectangle(SKETCH_71_W, SKETCH_71_H)
    extrude(amount=-CUT_EXTRUDE_37_DEPTH, mode=Mode.SUBTRACT)

    # 草圖72 → 除料-伸長38 (cut, through all)
    with BuildSketch(Plane.XZ.offset(11.785)):
        with Locations(Location((0, 0, 0), (0, 0, 270))):
            Circle(SKETCH_72_R)
    extrude(amount=-CUT_EXTRUDE_38_DEPTH, mode=Mode.SUBTRACT)

    # 草圖77 → 除料-伸長-薄件2 (cut)
    with BuildSketch(Plane(origin=(0, 11.18059116, 0), x_dir=(1, 0, 0), z_dir=(0, 1, 0)).offset(CUT_EXTRUDE_START)):
        Circle(SKETCH_77_R)
        Circle(SKETCH_77_R_2, mode=Mode.SUBTRACT)
    extrude(amount=CUT_EXTRUDE_2_DEPTH, mode=Mode.SUBTRACT)

    # 草圖78 → 填料-伸長26 (add)
    with BuildSketch(Plane.ZY.offset(11)):
        with Locations((-0.002688243, -0.30220442)):
            Rectangle(SKETCH_78_W, SKETCH_78_H)
    extrude(amount=EXTRUDE_26_DEPTH)



with BuildPart() as body_2:
    # 草圖80 → 填料-伸長28 (new body)
    with BuildSketch(Plane.XZ.offset(11.785)):
        with Locations((-12.55001559, -20.485134146)):
            Rectangle(SKETCH_80_W, SKETCH_80_H)
    extrude(amount=-EXTRUDE_28_DEPTH)


with BuildPart() as part_1:
    add(part.part)

    add(body_2.part)  # 填料-伸長29 merges body 2
    # 草圖81 → 填料-伸長29 (add)
    with BuildSketch(Plane(origin=(-11.1, 0, 0), x_dir=(0, 0, -1), z_dir=(1, 0, 0))):
        with Locations((20.485134146, -0.235)):
            Rectangle(SKETCH_81_W, SKETCH_81_H)
    extrude(amount=EXTRUDE_29_DEPTH)

    # 草圖82 → 除料-伸長39 (cut)
    with BuildSketch(Plane(origin=(3, 0, 0), x_dir=(0, 0, -1), z_dir=(1, 0, 0))):
        with Locations((20.485134146, 11.24779558)):
            Rectangle(SKETCH_82_W, SKETCH_82_H)
    extrude(amount=-CUT_EXTRUDE_39_DEPTH, mode=Mode.SUBTRACT)

    # 草圖83 → 填料-伸長30 (add)
    with BuildSketch(Plane.XY.offset(-17.410780818)):
        with Locations((-12.55001559, -0.30220442)):
            Rectangle(SKETCH_83_W, SKETCH_83_H)
    extrude(amount=-EXTRUDE_30_DEPTH)

    # 圓角1
    # the kernel refuses this fillet: 10 mm, written as the material it takes off along each edge
    with BuildSketch(Plane(origin=(3, -30.090254449, -23.559487474), x_dir=(-1, 0, 0), z_dir=(0, 1, 0))) as fillet_1_piece_1:
        with BuildLine():
            CenterArc((7.32210178, 10), FILLET_1_R, 222.927997508, 47.072002492)
            Line((0, 3.189212562), (-0.146442036, 3.052996813))
            ThreePointArc((-0.146442036, 3.052996813), (-0.2, 1.594606281), (-0.2, 0))
            Line((-0.2, 0), (0, -0.2))
            Line((0, -0.2), (7.32210178, -0.2))
            Line((7.32210178, -0.2), (7.32210178, 0))
        make_face()
    extrude(amount=59.576100059, mode=Mode.SUBTRACT)

    # 草圖84 → 填料-伸長31 (add)
    with BuildSketch(Plane(origin=(0, -11.785, 0), x_dir=(-1, 0, 0), z_dir=(0, -1, 0))):
        with Locations((12.85, 26.960780818)):
            Rectangle(SKETCH_84_W, SKETCH_84_H)
    extrude(amount=-EXTRUDE_31_DEPTH)

    # 草圖85 → 除料-伸長40 (cut, through all)
    with BuildSketch(Plane.XZ.offset(11.785)):
        with Locations((-12.85, -36.250780818)):
            Rectangle(SKETCH_85_W, SKETCH_85_H)
    extrude(amount=-CUT_EXTRUDE_40_DEPTH, mode=Mode.SUBTRACT)

    # 草圖86 → 填料-伸長32 (add)
    with BuildSketch(Plane.XY.offset(-17.410780818)):
        with Locations((-12.85, -0.30220442)):
            Rectangle(SKETCH_86_W, SKETCH_86_H)
    extrude(amount=EXTRUDE_32_DEPTH)

    # 草圖87 → 除料-伸長41 (cut)
    with BuildSketch(Plane.XZ.offset(11.785)):
        with Locations((-12.795744065, -0.002688243)):
            Rectangle(SKETCH_87_W, SKETCH_87_H)
    extrude(amount=-CUT_EXTRUDE_41_DEPTH, mode=Mode.SUBTRACT)


with BuildPart() as cut_extrude_41_piece_1:
    # of the separate pieces the step leaves, piece 1, a body of its own (cut_extrude_41_pieces)
    add(part_1.part.solids().sort_by_distance((3, 11.18059116, -20.370274912))[0])



with BuildPart() as cut_extrude_41_piece_2:
    # of the separate pieces the step leaves, piece 2, a body of its own (cut_extrude_41_pieces)
    add(part_1.part.solids().sort_by_distance((-11.1, 11.18059116, 17.405404333))[0])

    # 草圖89 → 填料-伸長33 (add)
    with BuildSketch(Plane.XZ.offset(11.785)):
        with Locations((-11.045744065, 20.485780818)):
            Rectangle(SKETCH_89_W, SKETCH_89_H)
    extrude(amount=-EXTRUDE_33_DEPTH)

    # 草圖90 → 填料-伸長34 (add)
    with BuildSketch(Plane.XY.offset(23.560780818)):
        Polygon((-11, 11.18059116), (-11.1, 11.18059116), (-11.1, -11.785), (-10.99148813, -11.785), (-10.99148813, 11.18059116), align=None)
    extrude(amount=EXTRUDE_34_DEPTH)

    # 草圖91 → 除料-伸長42 (cut)
    with BuildSketch(Plane.ZY.offset(11.1)):
        with Locations((45.175, -0.30220442)):
            Rectangle(SKETCH_91_W, SKETCH_91_H)
    extrude(amount=-CUT_EXTRUDE_42_DEPTH, mode=Mode.SUBTRACT)


with BuildPart() as cut_extrude_41_piece_1_1:
    add(cut_extrude_41_piece_1.part)

    add(cut_extrude_41_piece_2.part)  # 填料-伸長35 merges 除料-伸長41 piece 2
    # 草圖95 → 填料-伸長35 (add)
    with BuildSketch(Plane(origin=(-10.99148813, 0, 0), x_dir=(0, 0, -1), z_dir=(1, 0, 0))):
        with Locations((-20.485780818, -0.30220442)):
            Rectangle(SKETCH_95_W, SKETCH_95_H)
    extrude(amount=EXTRUDE_35_DEPTH)

    # 圓角2
    # the kernel refuses this fillet: 10 mm, written as the material it takes off along each edge
    with BuildSketch(Plane(origin=(3.10851187, -30.131013506, 23.560780818), x_dir=(-1, 0, 0), z_dir=(0, 1, 0))) as fillet_2_piece_1:
        with BuildLine():
            CenterArc((7.338405402, -10), FILLET_2_R, 90, 47.209333859)
            Line((0, -3.206782342), (-0.146768108, -3.070917989))
            ThreePointArc((-0.146768108, -3.070917989), (-0.2, -1.603391171), (-0.2, 0))
            Line((-0.2, 0), (0, 0.2))
            Line((0, 0.2), (7.338405402, 0.2))
            Line((7.338405402, 0.2), (7.338405402, 0))
        make_face()
    extrude(amount=59.657618171, mode=Mode.SUBTRACT)

    # 草圖96 → 除料-伸長43 (cut, through all)
    with BuildSketch(Plane.XZ.offset(11.785)):
        with Locations((-12.795744065, 43.415)):
            Rectangle(SKETCH_96_W, SKETCH_96_H)
    extrude(amount=-CUT_EXTRUDE_43_DEPTH, mode=Mode.SUBTRACT)

    # 草圖97 → 填料-伸長36 (add)
    with BuildSketch(Plane.XZ.offset(11.785)):
        with Locations((-12.85, -39.065134146)):
            Rectangle(SKETCH_97_W, SKETCH_97_H)
    extrude(amount=-EXTRUDE_36_DEPTH)

    # 草圖98 → 除料-伸長44 (cut)
    with BuildSketch(Plane(origin=(-11.1, 0, 0), x_dir=(0, 0, -1), z_dir=(1, 0, 0))):
        Polygon((17.410780818, 11.18059116), (17.410780818, 11.315), (22.198280677, 11.315), (38.461669752, 11.315), (42.139487474, 11.315), (42.139487474, 11.18059116), align=None)
    extrude(amount=-CUT_EXTRUDE_44_DEPTH, mode=Mode.SUBTRACT)

    # 草圖99 → 除料-伸長45 (cut)
    with BuildSketch(Plane(origin=(-10.99148813, 0, 0), x_dir=(0, 0, -1), z_dir=(1, 0, 0))):
        with Locations((-20.485780818, 11.24779558)):
            Rectangle(SKETCH_99_W, SKETCH_99_H)
    extrude(amount=-CUT_EXTRUDE_45_DEPTH, mode=Mode.SUBTRACT)

    # 草圖101 → 除料-伸長46 (cut)
    with BuildSketch(Plane(origin=(-10.99148813, 0, 0), x_dir=(0, 0, -1), z_dir=(1, 0, 0))):
        with Locations((-32.928668636, -0.30220442)):
            Circle(SKETCH_101_R)
        with Locations((32.849487474, -0.30220442)):
            Circle(SKETCH_101_R)
    extrude(amount=-CUT_EXTRUDE_46_DEPTH, mode=Mode.SUBTRACT)

    # 草圖103 → 除料-伸長49 (cut, through all)
    with BuildSketch(Plane(origin=(0, 11.18059116, 0), x_dir=(1, 0, 0), z_dir=(0, 1, 0))):
        with Locations((-12.795744065, -17.675404333)):
            Rectangle(SKETCH_103_W, SKETCH_103_H)
    extrude(amount=-CUT_EXTRUDE_49_DEPTH, mode=Mode.SUBTRACT)

    # 草圖104 → 除料-伸長50 (cut, through all)
    with BuildSketch(Plane(origin=(0, 11.18059116, 0), x_dir=(1, 0, 0), z_dir=(0, 1, 0))):
        with Locations((-12.795744065, 17.680780818)):
            Rectangle(SKETCH_104_W, SKETCH_104_H)
    extrude(amount=-CUT_EXTRUDE_50_DEPTH, mode=Mode.SUBTRACT)


solid = cut_extrude_41_piece_1_1.part
